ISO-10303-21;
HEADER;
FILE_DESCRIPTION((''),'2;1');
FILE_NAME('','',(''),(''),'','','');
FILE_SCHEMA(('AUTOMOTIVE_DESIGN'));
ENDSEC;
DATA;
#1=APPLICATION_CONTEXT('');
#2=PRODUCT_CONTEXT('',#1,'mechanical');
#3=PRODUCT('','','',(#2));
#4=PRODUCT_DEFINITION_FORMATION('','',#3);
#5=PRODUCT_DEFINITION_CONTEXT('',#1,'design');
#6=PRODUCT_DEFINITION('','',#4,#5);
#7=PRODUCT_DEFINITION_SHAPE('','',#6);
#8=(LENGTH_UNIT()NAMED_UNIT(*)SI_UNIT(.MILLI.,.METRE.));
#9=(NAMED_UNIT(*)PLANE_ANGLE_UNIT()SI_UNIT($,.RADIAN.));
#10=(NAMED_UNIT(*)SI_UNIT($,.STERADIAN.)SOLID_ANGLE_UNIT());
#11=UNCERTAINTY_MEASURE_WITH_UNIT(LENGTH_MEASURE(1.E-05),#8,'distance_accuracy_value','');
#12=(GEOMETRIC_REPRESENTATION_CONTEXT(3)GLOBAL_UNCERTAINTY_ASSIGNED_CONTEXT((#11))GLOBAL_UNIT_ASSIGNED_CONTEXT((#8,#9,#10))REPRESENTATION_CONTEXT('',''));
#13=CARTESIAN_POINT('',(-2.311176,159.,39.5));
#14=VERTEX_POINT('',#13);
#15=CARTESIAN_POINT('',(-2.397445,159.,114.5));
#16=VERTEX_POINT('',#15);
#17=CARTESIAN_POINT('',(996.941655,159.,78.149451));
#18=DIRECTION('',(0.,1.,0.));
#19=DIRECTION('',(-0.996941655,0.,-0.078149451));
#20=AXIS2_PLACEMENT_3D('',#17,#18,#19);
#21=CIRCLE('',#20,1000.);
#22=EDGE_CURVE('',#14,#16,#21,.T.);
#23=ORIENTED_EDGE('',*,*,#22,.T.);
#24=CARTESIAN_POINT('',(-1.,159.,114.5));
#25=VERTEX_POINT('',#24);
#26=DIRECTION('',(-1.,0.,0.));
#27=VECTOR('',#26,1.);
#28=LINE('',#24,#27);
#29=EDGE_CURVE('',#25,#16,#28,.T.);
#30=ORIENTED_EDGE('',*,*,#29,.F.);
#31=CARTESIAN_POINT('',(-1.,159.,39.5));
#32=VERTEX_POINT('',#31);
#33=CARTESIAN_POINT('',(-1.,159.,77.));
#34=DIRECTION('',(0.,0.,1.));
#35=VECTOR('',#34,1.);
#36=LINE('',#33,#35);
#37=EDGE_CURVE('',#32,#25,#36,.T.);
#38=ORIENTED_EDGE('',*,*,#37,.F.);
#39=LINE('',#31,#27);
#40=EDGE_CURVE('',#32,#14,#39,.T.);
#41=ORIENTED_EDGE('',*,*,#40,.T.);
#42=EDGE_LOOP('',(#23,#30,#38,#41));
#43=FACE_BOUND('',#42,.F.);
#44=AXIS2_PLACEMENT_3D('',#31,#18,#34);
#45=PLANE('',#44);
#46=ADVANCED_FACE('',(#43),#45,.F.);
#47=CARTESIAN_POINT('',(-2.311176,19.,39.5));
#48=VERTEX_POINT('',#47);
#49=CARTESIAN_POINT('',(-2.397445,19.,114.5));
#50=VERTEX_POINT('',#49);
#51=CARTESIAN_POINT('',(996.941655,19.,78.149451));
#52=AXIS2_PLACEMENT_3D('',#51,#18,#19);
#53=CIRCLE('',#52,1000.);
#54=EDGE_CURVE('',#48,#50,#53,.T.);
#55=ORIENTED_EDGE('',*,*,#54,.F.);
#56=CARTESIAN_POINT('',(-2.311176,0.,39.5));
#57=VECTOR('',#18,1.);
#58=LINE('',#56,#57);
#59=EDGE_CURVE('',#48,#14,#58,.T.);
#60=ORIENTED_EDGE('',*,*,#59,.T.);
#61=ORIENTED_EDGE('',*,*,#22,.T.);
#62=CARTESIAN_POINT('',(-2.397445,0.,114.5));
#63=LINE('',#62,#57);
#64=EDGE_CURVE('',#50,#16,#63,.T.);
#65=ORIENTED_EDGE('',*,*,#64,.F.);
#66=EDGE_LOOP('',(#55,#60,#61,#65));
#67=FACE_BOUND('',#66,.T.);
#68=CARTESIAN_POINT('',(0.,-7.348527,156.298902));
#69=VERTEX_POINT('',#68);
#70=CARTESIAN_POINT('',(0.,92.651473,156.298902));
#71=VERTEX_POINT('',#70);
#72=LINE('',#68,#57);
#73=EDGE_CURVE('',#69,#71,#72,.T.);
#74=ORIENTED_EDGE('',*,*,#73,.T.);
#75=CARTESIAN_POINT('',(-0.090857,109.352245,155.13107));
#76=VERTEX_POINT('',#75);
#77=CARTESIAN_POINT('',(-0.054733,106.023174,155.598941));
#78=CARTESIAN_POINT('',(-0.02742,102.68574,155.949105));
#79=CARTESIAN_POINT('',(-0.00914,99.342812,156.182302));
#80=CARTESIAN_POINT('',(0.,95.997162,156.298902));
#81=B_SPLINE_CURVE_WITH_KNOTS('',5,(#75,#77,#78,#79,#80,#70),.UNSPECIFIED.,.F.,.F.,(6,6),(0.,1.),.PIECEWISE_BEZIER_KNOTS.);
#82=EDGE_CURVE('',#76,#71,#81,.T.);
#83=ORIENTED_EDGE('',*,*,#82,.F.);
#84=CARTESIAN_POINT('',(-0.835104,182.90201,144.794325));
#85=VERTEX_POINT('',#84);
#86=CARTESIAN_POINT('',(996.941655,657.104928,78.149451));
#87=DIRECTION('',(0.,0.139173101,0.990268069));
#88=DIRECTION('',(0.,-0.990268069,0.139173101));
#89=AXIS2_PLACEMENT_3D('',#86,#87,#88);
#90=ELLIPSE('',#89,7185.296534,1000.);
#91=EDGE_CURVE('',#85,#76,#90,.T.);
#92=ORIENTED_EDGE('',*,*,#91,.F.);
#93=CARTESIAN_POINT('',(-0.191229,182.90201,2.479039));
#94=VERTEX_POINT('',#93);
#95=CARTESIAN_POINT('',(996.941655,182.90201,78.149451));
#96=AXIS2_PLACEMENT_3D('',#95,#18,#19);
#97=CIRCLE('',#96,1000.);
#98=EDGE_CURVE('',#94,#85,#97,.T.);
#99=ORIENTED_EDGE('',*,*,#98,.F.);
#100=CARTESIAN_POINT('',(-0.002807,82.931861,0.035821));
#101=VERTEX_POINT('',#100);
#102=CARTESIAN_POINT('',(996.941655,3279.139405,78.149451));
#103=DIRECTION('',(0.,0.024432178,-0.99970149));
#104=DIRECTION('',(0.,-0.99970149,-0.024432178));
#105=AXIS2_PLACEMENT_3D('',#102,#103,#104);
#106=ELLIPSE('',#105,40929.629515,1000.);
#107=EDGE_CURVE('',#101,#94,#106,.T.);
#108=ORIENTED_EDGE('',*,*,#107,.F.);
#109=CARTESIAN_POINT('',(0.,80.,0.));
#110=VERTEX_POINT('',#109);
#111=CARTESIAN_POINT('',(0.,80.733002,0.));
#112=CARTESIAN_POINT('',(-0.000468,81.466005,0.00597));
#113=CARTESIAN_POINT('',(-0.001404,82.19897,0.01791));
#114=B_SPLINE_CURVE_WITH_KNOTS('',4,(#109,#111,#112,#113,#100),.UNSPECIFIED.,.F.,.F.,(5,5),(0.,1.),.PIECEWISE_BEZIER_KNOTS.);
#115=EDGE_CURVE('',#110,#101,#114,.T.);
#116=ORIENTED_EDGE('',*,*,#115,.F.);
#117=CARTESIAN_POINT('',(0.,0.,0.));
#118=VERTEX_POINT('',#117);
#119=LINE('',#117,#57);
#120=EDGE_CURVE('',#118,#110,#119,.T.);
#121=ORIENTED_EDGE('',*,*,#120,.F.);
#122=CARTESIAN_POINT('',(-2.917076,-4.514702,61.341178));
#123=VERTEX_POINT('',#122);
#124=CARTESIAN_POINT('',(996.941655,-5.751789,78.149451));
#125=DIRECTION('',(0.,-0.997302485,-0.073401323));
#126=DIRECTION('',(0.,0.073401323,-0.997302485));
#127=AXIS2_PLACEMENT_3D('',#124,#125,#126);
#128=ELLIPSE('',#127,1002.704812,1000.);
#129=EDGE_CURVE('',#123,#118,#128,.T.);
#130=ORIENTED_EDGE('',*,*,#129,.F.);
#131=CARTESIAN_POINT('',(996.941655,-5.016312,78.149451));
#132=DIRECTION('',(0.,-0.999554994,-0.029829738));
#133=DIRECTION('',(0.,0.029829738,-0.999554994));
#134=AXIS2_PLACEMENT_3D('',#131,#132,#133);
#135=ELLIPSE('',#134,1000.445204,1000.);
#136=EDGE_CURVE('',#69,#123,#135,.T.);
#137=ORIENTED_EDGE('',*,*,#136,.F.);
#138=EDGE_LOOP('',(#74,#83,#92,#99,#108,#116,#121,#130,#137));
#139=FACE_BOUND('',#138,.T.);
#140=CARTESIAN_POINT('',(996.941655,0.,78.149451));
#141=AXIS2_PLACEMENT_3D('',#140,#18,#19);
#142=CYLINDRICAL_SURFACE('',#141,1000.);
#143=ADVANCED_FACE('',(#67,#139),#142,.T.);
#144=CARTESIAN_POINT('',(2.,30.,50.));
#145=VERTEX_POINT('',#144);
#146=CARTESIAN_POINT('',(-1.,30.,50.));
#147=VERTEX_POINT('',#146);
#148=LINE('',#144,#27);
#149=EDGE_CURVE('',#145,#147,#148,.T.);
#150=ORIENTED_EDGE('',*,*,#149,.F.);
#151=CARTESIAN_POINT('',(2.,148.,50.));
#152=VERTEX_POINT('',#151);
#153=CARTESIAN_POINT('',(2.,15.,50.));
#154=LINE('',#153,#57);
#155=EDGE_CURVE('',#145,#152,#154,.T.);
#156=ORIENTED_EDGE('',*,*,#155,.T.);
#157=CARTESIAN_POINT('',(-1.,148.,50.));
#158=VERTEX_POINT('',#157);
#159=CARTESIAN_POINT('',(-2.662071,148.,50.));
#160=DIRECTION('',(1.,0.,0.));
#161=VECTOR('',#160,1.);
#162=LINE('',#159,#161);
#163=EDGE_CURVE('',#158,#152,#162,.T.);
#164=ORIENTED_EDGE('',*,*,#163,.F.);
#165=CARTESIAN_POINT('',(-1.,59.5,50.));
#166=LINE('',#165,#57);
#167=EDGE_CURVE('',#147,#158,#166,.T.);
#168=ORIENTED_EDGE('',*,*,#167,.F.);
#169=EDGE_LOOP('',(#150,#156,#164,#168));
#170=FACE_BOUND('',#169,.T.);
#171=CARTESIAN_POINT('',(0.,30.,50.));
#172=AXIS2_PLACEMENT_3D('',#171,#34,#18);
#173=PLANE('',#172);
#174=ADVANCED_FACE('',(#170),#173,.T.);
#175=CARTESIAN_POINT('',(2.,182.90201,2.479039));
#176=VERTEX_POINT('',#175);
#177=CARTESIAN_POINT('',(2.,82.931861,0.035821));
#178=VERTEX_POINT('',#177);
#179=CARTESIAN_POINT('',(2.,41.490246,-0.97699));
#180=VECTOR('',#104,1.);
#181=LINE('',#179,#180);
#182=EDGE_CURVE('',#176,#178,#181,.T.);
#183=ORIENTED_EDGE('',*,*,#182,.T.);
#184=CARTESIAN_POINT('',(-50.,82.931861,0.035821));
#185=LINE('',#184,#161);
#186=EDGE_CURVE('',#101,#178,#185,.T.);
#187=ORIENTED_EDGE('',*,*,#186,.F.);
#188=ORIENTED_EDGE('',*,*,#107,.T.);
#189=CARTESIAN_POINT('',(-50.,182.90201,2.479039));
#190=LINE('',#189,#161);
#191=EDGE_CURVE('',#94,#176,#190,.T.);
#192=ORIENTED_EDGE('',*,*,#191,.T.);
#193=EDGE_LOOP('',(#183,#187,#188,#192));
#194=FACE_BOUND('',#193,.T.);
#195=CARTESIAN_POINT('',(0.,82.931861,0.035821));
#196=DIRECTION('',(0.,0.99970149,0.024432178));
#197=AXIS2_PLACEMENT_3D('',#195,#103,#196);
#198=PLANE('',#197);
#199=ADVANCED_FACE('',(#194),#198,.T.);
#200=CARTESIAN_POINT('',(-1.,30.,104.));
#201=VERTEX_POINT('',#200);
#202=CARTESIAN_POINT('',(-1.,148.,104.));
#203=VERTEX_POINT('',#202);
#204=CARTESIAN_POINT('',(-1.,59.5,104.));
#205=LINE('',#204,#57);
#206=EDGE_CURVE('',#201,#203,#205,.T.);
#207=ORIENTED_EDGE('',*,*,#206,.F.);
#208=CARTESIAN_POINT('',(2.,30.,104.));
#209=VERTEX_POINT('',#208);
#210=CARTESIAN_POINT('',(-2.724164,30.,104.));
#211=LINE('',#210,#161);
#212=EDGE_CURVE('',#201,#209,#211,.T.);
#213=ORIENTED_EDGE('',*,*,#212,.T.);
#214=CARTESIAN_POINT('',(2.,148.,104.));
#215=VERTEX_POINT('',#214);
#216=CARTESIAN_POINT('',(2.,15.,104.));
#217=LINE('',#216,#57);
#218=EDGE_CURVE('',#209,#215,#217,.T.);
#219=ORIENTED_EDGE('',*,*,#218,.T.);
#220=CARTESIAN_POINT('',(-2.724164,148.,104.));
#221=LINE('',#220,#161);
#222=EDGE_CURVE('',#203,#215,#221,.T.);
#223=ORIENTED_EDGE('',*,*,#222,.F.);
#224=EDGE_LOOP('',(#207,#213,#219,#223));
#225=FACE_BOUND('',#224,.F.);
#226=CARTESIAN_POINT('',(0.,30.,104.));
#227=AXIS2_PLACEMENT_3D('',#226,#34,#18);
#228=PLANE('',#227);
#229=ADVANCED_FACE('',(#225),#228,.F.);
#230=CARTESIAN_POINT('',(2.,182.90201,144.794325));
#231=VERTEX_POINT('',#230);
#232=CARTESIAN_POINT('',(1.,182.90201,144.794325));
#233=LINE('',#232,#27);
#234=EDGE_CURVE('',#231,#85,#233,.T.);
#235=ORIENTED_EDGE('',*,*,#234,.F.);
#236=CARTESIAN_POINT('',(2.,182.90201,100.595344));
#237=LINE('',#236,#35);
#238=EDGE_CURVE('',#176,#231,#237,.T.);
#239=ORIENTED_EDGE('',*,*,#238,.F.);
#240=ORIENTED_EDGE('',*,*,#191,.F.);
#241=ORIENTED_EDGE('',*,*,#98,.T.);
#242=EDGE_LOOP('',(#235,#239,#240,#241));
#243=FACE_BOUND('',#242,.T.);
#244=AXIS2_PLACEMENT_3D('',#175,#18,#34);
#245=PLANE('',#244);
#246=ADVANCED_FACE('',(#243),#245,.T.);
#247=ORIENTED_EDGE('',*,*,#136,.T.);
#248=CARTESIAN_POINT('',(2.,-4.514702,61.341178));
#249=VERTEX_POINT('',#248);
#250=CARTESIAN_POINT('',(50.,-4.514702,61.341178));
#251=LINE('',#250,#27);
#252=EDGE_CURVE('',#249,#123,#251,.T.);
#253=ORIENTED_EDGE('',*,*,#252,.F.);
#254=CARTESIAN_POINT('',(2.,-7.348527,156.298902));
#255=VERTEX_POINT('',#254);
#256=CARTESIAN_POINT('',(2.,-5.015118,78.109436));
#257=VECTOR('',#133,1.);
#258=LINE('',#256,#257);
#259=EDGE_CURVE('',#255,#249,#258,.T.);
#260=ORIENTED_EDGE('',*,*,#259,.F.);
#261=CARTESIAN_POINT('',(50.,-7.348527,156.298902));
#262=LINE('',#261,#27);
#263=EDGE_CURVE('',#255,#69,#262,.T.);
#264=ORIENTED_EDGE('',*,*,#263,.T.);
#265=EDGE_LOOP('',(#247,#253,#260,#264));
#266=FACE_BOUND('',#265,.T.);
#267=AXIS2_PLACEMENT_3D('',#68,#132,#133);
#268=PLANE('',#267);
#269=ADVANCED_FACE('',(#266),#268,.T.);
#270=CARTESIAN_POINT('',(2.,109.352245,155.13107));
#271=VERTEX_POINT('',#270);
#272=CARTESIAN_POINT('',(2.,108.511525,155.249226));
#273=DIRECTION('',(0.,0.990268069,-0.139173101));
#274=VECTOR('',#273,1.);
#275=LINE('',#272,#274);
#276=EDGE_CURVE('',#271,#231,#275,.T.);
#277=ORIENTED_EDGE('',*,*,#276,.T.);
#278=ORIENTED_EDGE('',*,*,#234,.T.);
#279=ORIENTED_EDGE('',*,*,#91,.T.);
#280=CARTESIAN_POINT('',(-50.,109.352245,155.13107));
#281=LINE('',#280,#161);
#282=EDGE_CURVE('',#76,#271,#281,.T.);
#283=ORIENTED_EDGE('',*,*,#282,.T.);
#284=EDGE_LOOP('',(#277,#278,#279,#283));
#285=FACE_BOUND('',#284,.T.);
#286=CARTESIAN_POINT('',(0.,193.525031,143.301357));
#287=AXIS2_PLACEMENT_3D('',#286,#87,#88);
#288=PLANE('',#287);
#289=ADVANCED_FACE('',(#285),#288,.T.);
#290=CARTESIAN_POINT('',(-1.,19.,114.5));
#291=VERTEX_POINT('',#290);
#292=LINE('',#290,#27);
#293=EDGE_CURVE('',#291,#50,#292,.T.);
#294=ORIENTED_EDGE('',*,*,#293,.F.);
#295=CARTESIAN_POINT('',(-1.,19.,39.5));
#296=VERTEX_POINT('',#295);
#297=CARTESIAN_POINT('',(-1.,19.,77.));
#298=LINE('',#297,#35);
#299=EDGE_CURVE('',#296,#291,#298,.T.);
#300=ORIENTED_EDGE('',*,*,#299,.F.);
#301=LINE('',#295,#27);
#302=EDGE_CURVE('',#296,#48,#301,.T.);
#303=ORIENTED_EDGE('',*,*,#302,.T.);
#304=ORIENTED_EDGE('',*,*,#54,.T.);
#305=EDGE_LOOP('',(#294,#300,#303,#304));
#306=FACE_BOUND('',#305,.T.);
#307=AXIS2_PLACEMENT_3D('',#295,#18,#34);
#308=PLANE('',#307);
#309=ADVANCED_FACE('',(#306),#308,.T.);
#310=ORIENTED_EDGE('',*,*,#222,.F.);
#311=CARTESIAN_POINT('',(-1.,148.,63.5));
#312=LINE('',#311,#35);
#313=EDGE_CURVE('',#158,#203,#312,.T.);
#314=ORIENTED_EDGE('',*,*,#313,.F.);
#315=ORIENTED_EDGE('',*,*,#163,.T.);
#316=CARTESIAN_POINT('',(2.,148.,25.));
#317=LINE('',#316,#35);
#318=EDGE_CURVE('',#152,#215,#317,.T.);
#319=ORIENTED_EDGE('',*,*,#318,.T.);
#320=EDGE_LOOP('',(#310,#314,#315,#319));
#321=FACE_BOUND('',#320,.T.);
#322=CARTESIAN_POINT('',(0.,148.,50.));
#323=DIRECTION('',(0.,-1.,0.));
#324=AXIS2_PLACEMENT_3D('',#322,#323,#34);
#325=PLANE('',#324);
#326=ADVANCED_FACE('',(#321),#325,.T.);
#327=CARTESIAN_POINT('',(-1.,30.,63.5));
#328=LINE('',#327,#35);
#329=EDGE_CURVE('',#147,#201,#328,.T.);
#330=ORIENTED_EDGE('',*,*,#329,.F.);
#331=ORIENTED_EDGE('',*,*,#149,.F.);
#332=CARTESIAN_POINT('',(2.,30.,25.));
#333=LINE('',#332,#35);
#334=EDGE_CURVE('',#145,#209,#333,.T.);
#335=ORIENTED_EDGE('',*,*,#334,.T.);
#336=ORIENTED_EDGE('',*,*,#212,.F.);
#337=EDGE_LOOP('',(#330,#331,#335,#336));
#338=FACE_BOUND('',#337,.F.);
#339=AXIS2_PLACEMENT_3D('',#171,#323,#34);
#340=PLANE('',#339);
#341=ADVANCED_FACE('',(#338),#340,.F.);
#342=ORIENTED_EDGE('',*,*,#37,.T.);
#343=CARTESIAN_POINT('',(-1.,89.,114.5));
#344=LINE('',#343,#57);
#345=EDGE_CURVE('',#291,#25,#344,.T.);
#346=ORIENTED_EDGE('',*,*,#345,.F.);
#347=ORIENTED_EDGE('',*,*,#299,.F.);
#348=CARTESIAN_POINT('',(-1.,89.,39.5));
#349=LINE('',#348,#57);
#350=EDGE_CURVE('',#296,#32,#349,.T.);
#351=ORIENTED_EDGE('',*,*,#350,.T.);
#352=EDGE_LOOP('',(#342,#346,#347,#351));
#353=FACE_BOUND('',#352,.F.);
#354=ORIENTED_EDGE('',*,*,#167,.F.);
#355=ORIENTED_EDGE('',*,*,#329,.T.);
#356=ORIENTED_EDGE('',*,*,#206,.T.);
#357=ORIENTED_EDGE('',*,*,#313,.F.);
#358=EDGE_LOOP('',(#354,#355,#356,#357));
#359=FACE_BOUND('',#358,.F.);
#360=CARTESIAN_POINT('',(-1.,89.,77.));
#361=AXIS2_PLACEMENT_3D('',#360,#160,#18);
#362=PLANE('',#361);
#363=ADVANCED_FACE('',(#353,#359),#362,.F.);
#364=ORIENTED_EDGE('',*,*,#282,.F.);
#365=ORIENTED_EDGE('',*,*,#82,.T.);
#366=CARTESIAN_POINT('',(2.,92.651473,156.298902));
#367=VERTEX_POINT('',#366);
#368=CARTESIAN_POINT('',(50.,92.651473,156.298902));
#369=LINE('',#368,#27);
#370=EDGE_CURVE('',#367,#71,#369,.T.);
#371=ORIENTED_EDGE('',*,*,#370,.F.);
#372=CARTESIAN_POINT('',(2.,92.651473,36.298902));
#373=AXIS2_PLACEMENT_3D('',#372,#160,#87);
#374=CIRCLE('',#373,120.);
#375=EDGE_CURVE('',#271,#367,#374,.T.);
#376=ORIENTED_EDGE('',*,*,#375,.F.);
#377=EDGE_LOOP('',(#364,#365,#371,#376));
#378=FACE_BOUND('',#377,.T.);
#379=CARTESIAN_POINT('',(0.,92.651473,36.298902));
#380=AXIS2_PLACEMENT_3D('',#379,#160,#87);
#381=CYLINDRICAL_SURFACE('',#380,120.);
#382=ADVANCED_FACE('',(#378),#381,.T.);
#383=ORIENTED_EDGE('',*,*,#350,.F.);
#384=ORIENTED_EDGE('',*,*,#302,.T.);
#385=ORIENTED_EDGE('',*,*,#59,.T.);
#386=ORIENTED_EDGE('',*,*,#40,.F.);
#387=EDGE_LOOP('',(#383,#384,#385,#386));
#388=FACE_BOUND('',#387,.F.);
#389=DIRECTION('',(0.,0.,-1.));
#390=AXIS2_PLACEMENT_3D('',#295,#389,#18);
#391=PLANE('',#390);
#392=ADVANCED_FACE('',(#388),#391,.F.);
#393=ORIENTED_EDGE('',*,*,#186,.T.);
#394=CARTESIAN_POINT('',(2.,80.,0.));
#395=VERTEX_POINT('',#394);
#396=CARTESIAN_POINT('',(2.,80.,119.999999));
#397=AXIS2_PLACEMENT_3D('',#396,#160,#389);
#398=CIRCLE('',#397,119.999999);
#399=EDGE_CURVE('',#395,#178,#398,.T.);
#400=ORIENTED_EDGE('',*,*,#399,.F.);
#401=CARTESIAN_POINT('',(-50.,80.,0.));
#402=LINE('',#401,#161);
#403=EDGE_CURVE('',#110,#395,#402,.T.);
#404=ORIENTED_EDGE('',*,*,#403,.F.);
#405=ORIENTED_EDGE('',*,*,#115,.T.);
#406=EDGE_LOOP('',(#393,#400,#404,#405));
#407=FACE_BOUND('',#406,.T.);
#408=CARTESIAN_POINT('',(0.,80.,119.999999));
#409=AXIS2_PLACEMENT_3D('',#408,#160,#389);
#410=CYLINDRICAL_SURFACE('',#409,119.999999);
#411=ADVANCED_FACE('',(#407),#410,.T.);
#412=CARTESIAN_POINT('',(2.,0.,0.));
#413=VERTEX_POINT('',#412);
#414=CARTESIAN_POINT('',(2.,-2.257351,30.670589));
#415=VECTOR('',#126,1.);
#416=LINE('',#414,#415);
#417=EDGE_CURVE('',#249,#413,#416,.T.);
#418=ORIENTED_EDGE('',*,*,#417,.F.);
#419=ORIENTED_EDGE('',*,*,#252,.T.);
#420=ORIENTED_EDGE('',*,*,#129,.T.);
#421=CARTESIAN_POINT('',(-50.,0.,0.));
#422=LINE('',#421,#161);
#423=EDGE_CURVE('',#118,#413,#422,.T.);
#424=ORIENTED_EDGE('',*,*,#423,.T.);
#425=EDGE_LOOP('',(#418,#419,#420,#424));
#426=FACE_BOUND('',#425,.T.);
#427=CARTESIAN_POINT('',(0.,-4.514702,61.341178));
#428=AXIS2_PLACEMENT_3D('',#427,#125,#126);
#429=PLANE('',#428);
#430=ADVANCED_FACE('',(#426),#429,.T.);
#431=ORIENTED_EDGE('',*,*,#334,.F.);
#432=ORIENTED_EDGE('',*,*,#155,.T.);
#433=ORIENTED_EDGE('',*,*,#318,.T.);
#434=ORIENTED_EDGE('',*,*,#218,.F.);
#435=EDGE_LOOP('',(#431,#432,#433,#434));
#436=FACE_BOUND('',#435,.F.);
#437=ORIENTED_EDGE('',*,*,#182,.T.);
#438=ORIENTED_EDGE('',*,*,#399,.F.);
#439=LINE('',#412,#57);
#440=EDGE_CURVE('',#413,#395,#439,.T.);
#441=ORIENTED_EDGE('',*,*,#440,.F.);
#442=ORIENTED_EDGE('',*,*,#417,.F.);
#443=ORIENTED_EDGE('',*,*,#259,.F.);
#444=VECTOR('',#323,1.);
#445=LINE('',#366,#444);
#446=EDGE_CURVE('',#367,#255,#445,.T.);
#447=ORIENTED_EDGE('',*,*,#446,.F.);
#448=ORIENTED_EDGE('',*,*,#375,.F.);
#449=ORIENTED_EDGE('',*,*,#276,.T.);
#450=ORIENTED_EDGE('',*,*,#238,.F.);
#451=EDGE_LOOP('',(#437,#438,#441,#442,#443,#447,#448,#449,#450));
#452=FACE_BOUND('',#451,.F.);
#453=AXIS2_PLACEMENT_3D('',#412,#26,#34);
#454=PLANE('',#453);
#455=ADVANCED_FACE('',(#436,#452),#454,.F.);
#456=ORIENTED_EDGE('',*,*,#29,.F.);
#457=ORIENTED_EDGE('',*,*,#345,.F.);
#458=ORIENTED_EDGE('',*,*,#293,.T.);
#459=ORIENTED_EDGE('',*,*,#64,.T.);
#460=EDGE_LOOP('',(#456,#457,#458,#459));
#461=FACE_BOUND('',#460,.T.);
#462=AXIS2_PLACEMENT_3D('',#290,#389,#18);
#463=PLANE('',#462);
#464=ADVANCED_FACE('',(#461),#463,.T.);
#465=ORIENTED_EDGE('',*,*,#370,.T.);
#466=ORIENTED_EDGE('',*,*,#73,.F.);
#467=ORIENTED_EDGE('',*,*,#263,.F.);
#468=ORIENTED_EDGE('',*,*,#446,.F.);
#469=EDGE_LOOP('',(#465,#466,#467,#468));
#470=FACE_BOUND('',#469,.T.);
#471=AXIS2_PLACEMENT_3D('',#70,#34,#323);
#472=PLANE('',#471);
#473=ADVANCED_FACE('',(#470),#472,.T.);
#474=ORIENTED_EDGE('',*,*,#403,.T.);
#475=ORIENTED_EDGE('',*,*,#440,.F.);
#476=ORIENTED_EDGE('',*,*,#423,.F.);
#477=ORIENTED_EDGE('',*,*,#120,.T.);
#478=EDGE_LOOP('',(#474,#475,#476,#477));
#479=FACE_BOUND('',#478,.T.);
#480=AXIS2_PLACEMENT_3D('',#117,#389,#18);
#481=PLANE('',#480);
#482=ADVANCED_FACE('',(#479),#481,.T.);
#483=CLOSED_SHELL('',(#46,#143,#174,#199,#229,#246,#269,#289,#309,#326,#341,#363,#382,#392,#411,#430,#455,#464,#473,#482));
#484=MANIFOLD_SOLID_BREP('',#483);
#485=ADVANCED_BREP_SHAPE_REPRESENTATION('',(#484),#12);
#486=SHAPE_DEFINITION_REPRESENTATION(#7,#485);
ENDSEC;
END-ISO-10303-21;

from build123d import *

# Parameters (mm, degrees)
F1_DEPTH      = 50
F2_W          = 67.5757344365
F2_H          = 156.2989021295
F3_DEPTH      = 250.3970603371
F3_DEPTH_BACK = 7.3495271517
F4_W          = 118
F4_H          = 54
F5_DEPTH      = 3.0593451962
F5_DEPTH_BACK = 2.001
F7_W          = 140
F7_H          = 75
F8_DEPTH      = 25
F9_W          = 87.5550785909
F9_H          = 196.2326095419
F10_DEPTH     = 5.0593451962


with BuildPart() as f1:
    # F0 (on Right) → F1 (new body, symmetric)
    with BuildSketch(Plane.YZ):
        with BuildLine():
            Line((-4.5147020681, 61.3411776654), (0, 0))
            Line((0, 0), (80, 0))
            ThreePointArc((80, 0), (81.4660401002, 0.0089556407), (82.9318613783, 0.0358212263))
            Line((82.9318613783, 0.0358212263), (182.9020103564, 2.4790390415))
            ThreePointArc((182.9020103564, 2.4790390415), (187.6095215539, 2.6866314133), (192.3052533926, 3.0788797612))
            Line((192.3052533926, 3.0788797612), (237.0668801629, 7.7045439166))
            ThreePointArc((237.0668801629, 7.7045439166), (244.0081250748, 10.8561399368), (247.6503203917, 17.5529938008))
            ThreePointArc((247.6503203917, 17.5529938008), (250.0657087208, 59.7730943442), (242.5639369549, 101.3915326986))
            ThreePointArc((242.5639369549, 101.3915326986), (226.8577665619, 127.0421650064), (200.677105552, 141.847965062))
            ThreePointArc((200.677105552, 141.847965062), (197.1231870334, 142.6835068064), (193.5250308066, 143.3013567969))
            Line((193.5250308066, 143.3013567969), (109.3522449635, 155.1310703785))
            ThreePointArc((109.3522449635, 155.1310703785), (101.0222496976, 156.0065881607), (92.6514728483, 156.2989021295))
            Line((92.6514728483, 156.2989021295), (-7.3485271517, 156.2989021295))
            Line((-7.3485271517, 156.2989021295), (-4.5147020681, 61.3411776654))
        make_face()
    extrude(amount=F1_DEPTH, both=True)

    # F2 (on Front) → F3 (cut, two sides)
    with BuildSketch(Plane.XZ) as f3_sk:
        with BuildLine():
            ThreePointArc((0, 0), (-3.0583450882, 78.1494510648), (0, 156.2989021295))
            Line((0, 156.2989021295), (-64.2212554812, 156.2989021295))
            Line((-64.2212554812, 156.2989021295), (-64.2212554812, 0))
            Line((-64.2212554812, 0), (0, 0))
        make_face()
        with Locations((35.7878672183, 78.1494510648)):
            Rectangle(F2_W, F2_H)
    extrude(amount=-F3_DEPTH, mode=Mode.SUBTRACT)
    extrude(f3_sk.sketch, amount=F3_DEPTH_BACK, mode=Mode.SUBTRACT)

    # F4 (on Right) → F5 (cut, two sides)
    with BuildSketch(Plane.YZ) as f5_sk:
        with Locations((89, 77)):
            Rectangle(F4_W, F4_H)
    extrude(amount=-F5_DEPTH, mode=Mode.SUBTRACT)
    extrude(f5_sk.sketch, amount=F5_DEPTH_BACK, mode=Mode.SUBTRACT)

    # F7 (on offset) → F8 (cut)
    with BuildSketch(Plane.YZ.offset(-1)):
        with Locations((89, 77)):
            Rectangle(F7_W, F7_H)
    extrude(amount=-F8_DEPTH, mode=Mode.SUBTRACT)

    # F9 (on face) → F10 (cut, through all)
    with BuildSketch(Plane.YZ.offset(2)):
        with Locations((226.6795496519, 100.5953438125)):
            Rectangle(F9_W, F9_H)
    extrude(amount=-F10_DEPTH, mode=Mode.SUBTRACT)


solid = f1.part
